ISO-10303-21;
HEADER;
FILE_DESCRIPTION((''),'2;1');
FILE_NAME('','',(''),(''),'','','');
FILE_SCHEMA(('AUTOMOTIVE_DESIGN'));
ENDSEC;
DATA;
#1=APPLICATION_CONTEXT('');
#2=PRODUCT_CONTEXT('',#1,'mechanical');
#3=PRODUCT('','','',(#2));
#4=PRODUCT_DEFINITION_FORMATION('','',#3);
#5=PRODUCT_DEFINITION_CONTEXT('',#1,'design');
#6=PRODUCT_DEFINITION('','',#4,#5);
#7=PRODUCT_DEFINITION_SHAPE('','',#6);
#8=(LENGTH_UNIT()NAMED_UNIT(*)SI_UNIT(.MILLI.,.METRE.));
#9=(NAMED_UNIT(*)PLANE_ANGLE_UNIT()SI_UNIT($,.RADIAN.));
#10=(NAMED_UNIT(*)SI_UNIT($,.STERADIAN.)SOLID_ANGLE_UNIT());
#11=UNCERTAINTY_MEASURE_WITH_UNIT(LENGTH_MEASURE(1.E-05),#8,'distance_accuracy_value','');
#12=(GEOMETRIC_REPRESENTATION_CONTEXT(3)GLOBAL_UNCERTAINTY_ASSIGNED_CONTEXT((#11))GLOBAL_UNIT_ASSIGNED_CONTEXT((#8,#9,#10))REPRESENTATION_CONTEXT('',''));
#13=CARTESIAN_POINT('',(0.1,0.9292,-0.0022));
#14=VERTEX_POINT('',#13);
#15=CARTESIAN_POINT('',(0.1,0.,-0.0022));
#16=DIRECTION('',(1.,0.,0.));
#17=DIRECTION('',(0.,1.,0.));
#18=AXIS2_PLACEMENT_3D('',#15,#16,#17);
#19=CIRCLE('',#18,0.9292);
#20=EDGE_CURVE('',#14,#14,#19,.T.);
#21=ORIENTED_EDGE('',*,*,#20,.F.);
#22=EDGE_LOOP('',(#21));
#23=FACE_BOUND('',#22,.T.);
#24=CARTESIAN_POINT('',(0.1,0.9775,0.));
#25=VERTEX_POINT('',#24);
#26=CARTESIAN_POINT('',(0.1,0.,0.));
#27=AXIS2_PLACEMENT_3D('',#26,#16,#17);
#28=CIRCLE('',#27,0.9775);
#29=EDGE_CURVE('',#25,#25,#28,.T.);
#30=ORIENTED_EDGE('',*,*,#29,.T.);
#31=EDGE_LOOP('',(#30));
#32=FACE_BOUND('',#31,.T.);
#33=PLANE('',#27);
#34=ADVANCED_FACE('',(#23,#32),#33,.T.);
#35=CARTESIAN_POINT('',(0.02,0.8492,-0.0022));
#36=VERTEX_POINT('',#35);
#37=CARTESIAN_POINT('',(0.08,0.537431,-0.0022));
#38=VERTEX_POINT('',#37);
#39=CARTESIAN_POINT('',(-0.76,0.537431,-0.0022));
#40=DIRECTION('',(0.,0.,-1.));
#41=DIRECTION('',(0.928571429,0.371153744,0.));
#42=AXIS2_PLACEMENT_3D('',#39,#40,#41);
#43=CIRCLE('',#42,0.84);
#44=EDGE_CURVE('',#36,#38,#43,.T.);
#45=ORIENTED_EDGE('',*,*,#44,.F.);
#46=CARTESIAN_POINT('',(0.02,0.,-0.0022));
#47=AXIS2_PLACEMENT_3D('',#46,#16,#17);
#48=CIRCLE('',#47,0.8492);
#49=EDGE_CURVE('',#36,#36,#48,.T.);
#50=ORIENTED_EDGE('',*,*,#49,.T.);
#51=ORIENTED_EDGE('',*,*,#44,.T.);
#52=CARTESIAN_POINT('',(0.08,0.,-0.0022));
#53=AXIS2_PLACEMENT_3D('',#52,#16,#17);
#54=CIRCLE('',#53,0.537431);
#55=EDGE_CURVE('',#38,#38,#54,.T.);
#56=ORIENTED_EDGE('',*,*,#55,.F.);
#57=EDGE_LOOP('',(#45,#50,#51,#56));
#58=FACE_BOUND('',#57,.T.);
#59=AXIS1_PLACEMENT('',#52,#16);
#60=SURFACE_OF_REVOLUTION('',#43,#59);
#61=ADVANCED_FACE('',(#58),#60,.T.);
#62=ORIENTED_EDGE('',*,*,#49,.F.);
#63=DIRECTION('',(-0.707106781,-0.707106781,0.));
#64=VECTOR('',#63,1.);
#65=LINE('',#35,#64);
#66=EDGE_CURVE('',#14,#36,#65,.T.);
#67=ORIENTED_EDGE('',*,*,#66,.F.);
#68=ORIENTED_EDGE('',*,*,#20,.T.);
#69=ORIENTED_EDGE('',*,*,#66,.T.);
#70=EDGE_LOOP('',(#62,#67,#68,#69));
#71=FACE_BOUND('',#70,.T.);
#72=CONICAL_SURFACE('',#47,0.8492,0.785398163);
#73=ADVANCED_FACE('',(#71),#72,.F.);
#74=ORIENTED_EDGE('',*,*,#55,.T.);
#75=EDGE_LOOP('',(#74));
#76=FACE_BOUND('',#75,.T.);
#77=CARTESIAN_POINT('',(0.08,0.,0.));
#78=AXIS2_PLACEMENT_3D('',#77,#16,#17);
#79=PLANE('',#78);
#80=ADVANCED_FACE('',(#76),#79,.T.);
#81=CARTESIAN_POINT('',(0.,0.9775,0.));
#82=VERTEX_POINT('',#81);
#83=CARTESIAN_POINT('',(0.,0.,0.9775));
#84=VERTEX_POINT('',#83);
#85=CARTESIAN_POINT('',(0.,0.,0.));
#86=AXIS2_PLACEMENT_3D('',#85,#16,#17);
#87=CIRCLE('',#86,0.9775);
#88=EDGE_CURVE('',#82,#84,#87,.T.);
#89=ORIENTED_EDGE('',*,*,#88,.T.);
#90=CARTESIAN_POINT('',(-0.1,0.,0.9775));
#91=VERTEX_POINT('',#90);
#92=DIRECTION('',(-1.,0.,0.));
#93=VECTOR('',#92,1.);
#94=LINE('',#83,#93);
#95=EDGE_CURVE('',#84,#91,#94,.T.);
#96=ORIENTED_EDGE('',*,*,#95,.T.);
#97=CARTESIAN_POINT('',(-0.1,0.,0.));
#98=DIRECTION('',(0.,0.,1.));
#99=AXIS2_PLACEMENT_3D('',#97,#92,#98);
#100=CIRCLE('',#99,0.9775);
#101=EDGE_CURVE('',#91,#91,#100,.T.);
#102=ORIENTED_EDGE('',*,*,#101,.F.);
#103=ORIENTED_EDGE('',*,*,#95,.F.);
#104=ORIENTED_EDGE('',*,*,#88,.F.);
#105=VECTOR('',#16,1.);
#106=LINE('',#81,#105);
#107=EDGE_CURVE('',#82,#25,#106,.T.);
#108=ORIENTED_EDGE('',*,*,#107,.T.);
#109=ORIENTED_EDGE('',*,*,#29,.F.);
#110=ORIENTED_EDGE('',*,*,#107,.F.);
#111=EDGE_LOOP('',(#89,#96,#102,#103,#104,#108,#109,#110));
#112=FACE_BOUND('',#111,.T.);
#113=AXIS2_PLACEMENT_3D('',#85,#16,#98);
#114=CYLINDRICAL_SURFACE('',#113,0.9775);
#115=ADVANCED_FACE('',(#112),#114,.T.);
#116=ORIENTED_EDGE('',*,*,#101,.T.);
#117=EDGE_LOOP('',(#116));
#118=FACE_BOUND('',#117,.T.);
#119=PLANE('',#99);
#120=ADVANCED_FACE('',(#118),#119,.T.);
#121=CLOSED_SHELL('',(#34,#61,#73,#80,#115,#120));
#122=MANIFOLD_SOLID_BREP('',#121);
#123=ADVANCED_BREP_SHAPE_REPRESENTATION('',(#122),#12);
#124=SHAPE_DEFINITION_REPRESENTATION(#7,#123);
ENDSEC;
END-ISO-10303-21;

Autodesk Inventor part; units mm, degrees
ref_plane "YZ Plane" through (0, 0, 0) normal (1, 0, 0) x (0, 1, 0)
ref_plane "XZ Plane" through (0, 0, 0) normal (0, 1, 0) x (-1, 0, 0)
ref_plane "XY Plane" through (0, 0, 0) normal (0, 0, 1) x (1, 0, 0)
sketch "Boceto1" plane through (0, 0, 0) normal (1, 0, 0) x (0, 1, 0)
  circle A0 centre (0, -0.0022) radius 0.8492
  circle A1 centre (0, 0) radius 0.9775
  circle A2 centre (0, 0) radius 0.925
  dimension "d1" = 1.85
extrude "Extrusión1" add sketch "Boceto1" along normal blind 0.1 contours A1
sketch "Boceto2" plane through (0, 0, 0) normal (1, 0, 0) x (0, 1, 0)
  circle A0 centre (0, -0.0022) radius 0.8492
  circle A1 centre (0, 0) radius 0.9775
  circle A2 centre (0, 0) radius 0.925 projected
extrude "Extrusión2" add sketch "Boceto2" along normal blind 0.1 contours A2
chamfer "Chaflán1" distance 0.08 angle 45 1 edges at (0.1, -0.8492, -0.0022)
sketch "Boceto3" plane through (0, 0, 0) normal (1, 0, 0) x (0, 1, 0)
  circle A0 centre (0, -0.0022) radius 0.8492 projected
  point P0 (0, 0)
extrude "Extrusión3" add sketch "Boceto3" along normal blind 0.08
fillet "Empalme1" radius 0.84 1 edges at (0.08, -0.8492, -0.0022)
sketch "Boceto4" plane through (0, 0, 0) normal (-1, 0, 0) x (0, 0, 1)
  line L0 (-0.8864, -0.025) -> (-0.9364, -0.025)
  line L1 (-0.9364, -0.025) -> (-0.9364, 0.025)
  line L2 (-0.9364, 0.025) -> (-0.8864, 0.025)
  line L3 (-0.8864, 0.025) -> (-0.8864, -0.025)
  line L4 (0.8864, 0.025) -> (0.9364, 0.025)
  line L5 (0.9364, 0.025) -> (0.9364, -0.025)
  line L6 (0.9364, -0.025) -> (0.8864, -0.025)
  line L7 (0.8864, -0.025) -> (0.8864, 0.025)
  circle A0 centre (0, 0) radius 0.9775
extrude "Extrusión4" add sketch "Boceto4" along normal blind 0.1 contours L0 L1 L2 L3 | L4 L5 L6 L7
sketch "Boceto5" plane through (0, 0, 0) normal (-1, 0, 0) x (0, 0, 1)
  line L0 (-0.9364, -0.025) -> (-0.9364, 0.025) projected
  line L1 (-0.9364, 0.025) -> (-0.8864, 0.025) projected
  line L2 (-0.8864, 0.025) -> (-0.8864, -0.025) projected
  line L3 (-0.8864, -0.025) -> (-0.9364, -0.025) projected
  line L4 (0.9364, 0.025) -> (0.9364, -0.025) projected
  line L5 (0.9364, -0.025) -> (0.8864, -0.025) projected
  line L6 (0.8864, -0.025) -> (0.8864, 0.025) projected
  line L7 (0.8864, 0.025) -> (0.9364, 0.025) projected
  circle A0 centre (0, 0) radius 0.9775 projected
extrude "Extrusión5" add sketch "Boceto5" along normal blind 0.1
properties part number "ET20"
